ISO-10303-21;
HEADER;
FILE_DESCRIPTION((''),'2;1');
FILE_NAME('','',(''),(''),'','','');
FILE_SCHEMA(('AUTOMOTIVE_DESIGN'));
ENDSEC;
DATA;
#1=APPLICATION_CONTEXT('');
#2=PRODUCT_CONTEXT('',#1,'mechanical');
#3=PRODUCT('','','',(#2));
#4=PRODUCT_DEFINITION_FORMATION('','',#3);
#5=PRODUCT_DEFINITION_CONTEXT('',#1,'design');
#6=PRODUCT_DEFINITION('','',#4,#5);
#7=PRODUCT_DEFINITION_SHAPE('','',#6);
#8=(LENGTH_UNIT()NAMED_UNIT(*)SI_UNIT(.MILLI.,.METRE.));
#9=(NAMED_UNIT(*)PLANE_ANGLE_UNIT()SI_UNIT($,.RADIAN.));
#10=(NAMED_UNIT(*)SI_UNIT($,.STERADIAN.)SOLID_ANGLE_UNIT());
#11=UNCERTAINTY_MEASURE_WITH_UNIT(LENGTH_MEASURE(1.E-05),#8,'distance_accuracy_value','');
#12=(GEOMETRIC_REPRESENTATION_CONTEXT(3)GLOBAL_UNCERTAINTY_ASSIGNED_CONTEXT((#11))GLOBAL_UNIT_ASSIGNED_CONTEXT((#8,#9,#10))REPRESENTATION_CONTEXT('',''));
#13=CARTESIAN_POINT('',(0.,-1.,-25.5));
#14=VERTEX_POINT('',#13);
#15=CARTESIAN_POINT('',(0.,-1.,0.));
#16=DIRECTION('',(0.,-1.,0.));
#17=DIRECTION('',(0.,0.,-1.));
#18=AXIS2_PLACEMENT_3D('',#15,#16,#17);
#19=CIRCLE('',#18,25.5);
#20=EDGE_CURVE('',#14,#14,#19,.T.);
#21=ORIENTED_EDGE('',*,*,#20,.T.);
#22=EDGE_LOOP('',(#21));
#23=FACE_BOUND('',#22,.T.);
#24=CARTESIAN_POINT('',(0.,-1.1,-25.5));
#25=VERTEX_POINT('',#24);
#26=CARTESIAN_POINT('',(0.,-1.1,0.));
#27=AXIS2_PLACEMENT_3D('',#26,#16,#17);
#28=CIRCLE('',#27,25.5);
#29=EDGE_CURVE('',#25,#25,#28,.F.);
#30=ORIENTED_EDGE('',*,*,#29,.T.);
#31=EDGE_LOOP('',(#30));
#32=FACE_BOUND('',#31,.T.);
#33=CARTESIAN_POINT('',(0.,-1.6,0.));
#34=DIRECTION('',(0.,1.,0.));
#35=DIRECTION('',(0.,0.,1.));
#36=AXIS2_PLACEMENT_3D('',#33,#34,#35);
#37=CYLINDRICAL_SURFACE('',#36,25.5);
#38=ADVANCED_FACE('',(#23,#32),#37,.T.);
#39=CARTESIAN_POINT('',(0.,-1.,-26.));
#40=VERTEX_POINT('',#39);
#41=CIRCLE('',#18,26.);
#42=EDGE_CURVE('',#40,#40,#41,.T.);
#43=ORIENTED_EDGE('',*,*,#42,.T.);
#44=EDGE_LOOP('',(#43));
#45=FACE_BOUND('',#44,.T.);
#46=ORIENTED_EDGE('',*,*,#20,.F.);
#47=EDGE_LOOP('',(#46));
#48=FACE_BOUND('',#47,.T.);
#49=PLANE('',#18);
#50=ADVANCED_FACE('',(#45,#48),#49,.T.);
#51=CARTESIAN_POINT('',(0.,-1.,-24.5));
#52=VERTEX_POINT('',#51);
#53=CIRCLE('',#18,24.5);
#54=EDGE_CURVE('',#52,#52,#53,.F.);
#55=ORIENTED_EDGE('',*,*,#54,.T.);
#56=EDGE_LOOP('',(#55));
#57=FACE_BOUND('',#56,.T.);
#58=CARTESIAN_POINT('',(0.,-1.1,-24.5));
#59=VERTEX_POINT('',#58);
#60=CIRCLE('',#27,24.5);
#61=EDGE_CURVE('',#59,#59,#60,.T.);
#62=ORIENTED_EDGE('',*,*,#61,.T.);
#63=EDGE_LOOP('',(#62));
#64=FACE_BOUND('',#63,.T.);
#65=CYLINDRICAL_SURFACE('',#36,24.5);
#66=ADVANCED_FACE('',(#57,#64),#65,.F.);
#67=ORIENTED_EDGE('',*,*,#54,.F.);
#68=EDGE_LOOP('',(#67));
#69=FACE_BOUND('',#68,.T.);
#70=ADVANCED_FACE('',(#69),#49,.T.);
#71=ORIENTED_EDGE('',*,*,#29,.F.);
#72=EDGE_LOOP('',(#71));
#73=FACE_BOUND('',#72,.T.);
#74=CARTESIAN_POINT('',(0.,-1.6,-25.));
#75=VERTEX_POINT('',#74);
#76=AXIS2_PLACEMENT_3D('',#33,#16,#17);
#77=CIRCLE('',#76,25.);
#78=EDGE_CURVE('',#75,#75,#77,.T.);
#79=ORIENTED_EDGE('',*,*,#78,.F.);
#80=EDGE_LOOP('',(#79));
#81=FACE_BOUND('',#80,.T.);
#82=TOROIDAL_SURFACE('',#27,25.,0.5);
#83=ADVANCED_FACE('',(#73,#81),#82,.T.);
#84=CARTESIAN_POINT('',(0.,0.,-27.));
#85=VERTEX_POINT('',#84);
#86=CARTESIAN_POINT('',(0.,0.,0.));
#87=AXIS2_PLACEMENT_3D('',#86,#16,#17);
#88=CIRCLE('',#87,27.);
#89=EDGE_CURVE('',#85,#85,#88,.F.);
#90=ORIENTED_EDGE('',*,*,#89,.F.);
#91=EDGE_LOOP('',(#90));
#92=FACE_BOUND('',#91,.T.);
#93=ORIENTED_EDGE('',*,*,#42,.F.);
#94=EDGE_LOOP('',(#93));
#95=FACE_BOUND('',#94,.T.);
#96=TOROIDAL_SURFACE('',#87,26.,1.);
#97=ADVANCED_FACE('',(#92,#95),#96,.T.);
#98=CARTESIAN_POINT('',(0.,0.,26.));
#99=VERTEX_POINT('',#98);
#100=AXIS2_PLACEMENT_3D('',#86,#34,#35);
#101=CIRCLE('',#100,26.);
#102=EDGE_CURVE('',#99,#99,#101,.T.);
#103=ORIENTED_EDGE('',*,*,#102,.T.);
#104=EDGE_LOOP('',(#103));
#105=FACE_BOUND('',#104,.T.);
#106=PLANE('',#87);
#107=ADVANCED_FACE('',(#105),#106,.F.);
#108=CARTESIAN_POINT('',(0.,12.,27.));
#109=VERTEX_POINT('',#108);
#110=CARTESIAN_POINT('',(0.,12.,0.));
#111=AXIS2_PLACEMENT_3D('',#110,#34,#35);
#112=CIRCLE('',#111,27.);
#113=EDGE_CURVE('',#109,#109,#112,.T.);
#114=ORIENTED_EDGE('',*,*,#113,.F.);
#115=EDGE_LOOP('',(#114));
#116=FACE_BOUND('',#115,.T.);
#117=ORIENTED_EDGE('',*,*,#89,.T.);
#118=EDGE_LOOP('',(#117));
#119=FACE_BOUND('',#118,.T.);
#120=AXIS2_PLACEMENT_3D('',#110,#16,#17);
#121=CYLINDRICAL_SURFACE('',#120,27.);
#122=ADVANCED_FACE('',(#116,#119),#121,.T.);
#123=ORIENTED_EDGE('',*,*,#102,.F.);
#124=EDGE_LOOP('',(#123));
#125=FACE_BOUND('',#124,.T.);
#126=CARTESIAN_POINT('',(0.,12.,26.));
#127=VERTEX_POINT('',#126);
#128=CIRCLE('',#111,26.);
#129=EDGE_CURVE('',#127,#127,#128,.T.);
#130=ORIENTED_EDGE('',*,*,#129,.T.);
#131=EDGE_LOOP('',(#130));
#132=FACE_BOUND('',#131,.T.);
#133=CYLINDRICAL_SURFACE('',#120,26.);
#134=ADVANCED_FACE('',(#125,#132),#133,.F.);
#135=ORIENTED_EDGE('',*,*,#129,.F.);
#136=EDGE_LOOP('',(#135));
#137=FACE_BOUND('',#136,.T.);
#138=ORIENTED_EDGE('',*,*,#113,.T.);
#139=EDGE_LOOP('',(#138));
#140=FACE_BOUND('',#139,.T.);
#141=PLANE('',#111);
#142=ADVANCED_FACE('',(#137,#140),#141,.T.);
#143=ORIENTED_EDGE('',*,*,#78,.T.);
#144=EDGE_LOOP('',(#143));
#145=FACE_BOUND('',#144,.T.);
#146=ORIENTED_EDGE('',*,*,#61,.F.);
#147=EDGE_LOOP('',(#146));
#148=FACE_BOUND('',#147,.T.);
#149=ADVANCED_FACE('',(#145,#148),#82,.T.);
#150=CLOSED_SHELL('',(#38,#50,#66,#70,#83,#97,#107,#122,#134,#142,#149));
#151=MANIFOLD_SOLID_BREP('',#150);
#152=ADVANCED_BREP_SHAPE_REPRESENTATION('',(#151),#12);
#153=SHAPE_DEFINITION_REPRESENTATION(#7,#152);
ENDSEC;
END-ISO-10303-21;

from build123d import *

# Parameters (mm, degrees)
SKETCH1_R           = 27
SKETCH1_R_2         = 26
BOSS_EXTRUDE1_DEPTH = 12
BOSS_EXTRUDE2_START = 1
SKETCH2_R           = 27
BOSS_EXTRUDE2_DEPTH = 1
SKETCH3_R           = 25.5
SKETCH3_R_2         = 24.5
BOSS_EXTRUDE3_DEPTH = 0.6
FILLET1_R           = 1
FILLET2_R           = 0.5


with BuildPart() as part:
    # Sketch1 → Boss-Extrude1 (new body)
    with BuildSketch(Plane(origin=(0, 0, 0), x_dir=(1, 0, 0), z_dir=(0, 1, 0))):
        with Locations(Location((0, 0, 0), (0, 0, 270))):
            Circle(SKETCH1_R)
        with Locations(Location((0, 0, 0), (0, 0, 270))):
            Circle(SKETCH1_R_2, mode=Mode.SUBTRACT)
    extrude(amount=BOSS_EXTRUDE1_DEPTH)

    # Sketch2 → Boss-Extrude2 (add)
    with BuildSketch(Plane.XZ.offset(BOSS_EXTRUDE2_START)):
        with Locations(Location((0, 0, 0), (0, 0, 270))):
            Circle(SKETCH2_R)
    extrude(amount=-BOSS_EXTRUDE2_DEPTH)

    # Sketch3 → Boss-Extrude3 (add)
    with BuildSketch(Plane.XZ.offset(1)):
        with Locations(Location((0, 0, 0), (0, 0, 270))):
            Circle(SKETCH3_R)
        with Locations(Location((0, 0, 0), (0, 0, 270))):
            Circle(SKETCH3_R_2, mode=Mode.SUBTRACT)
    extrude(amount=BOSS_EXTRUDE3_DEPTH)

    # Fillet1
    fillet1_edges = [part.edges().sort_by_distance(p)[0] for p in [
        (0, -1, 27),
    ]]
    fillet(fillet1_edges, radius=FILLET1_R - 0.0001)  # a hair under: the kernel refuses the full size

    # Fillet2
    fillet2_edges = [part.edges().sort_by_distance(p)[0] for p in [
        (0, -1.6, 25.5),
        (0, -1.6, 24.5),
    ]]
    fillet(fillet2_edges, radius=FILLET2_R - 0.0001)  # a hair under: the kernel refuses the full size


solid = part.part
